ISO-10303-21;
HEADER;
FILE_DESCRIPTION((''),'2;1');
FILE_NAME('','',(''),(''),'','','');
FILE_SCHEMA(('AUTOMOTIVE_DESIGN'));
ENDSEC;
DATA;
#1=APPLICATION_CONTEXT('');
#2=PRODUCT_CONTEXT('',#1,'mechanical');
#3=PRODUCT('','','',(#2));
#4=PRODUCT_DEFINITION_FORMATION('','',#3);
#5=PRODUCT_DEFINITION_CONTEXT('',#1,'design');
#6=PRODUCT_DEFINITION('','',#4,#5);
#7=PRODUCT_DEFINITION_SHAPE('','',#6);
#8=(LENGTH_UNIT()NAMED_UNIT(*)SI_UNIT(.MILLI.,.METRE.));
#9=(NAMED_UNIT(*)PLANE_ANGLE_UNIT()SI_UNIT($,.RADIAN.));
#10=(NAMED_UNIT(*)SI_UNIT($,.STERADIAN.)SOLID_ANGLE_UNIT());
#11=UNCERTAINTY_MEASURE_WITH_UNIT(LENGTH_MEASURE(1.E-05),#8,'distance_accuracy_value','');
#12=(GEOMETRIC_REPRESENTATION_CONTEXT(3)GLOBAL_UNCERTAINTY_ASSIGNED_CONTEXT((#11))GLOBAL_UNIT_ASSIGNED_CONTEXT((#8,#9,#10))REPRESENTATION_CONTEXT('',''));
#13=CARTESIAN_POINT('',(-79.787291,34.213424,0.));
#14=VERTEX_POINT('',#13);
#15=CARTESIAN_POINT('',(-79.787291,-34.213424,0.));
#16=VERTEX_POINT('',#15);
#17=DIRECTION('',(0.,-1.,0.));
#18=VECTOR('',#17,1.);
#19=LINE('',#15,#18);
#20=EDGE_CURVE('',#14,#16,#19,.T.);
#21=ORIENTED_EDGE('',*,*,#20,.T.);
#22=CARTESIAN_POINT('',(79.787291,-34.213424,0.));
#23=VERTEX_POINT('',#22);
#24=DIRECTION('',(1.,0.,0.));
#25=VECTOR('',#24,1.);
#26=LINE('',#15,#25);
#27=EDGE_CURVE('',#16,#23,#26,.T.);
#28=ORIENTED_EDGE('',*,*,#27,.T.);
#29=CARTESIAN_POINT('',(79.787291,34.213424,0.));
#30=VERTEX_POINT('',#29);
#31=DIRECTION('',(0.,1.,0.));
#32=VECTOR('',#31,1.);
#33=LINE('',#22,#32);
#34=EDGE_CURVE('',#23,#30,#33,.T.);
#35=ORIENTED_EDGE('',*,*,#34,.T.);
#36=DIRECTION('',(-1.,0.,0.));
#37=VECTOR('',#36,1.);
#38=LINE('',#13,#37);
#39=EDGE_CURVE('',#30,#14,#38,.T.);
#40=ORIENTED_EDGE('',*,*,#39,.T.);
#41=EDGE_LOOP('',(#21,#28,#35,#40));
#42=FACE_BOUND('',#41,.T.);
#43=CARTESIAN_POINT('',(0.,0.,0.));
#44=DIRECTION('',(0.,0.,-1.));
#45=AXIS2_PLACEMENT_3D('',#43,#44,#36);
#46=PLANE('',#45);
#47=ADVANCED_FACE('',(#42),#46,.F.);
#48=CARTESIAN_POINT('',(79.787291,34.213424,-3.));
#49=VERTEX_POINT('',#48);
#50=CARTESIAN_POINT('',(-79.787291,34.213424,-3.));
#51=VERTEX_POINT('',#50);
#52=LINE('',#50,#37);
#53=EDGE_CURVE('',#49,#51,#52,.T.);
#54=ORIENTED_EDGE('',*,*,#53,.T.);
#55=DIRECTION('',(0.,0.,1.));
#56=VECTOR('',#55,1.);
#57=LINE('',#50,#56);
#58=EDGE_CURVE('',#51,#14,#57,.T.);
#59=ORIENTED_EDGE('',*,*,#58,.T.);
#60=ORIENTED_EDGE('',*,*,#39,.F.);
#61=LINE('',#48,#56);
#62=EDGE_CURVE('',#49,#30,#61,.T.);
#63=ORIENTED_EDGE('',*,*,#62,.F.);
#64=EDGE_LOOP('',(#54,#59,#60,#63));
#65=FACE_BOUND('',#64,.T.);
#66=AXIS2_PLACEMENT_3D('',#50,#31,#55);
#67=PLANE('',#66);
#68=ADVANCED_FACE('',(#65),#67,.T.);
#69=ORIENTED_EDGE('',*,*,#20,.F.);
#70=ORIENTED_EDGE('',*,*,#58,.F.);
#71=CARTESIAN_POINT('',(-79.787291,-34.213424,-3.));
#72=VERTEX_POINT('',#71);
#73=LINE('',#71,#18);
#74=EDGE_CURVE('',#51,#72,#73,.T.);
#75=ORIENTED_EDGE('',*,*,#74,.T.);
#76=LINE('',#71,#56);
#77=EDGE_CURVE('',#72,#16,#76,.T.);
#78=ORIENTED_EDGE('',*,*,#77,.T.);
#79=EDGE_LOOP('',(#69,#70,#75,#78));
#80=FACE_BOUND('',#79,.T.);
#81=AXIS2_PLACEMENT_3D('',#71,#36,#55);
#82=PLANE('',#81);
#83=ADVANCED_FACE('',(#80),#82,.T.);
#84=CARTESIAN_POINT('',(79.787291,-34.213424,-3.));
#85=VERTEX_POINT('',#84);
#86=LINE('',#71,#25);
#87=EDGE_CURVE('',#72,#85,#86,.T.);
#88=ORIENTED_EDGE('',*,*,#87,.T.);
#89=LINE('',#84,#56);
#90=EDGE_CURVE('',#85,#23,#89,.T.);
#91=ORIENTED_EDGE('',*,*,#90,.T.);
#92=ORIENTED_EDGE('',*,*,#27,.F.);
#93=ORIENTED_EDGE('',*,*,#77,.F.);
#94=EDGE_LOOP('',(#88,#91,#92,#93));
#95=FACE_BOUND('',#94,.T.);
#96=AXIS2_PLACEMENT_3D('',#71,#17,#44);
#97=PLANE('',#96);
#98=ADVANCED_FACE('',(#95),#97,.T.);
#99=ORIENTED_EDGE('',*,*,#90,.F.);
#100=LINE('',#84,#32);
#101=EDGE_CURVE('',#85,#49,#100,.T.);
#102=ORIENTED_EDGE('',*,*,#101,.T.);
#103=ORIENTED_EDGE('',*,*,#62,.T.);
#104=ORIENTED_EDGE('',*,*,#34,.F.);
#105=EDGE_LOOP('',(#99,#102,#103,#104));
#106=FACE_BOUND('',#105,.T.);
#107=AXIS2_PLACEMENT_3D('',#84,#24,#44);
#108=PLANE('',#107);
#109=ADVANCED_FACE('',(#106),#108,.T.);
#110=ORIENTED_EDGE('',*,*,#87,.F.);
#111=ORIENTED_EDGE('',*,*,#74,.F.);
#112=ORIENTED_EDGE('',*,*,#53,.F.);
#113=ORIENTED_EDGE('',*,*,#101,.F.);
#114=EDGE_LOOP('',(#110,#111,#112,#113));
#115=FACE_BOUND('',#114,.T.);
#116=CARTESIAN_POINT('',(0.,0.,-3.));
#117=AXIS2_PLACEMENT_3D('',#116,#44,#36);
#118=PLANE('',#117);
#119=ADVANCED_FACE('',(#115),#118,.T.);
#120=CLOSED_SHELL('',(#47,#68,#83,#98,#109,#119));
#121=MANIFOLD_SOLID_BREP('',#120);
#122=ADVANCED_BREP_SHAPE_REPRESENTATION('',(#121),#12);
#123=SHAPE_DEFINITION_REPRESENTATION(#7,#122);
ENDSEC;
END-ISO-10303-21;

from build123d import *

# Parameters (mm, degrees)
SKETCH2_W          = 159.574581504
SKETCH2_H          = 68.426848692
BASE_FLANGE1_DEPTH = 3


# Sheet-metal steps are written as plain solids
with BuildPart() as part:
    # Sketch2 → Base-Flange1 (new body)
    with BuildSketch(Plane.XY):
        Rectangle(SKETCH2_W, SKETCH2_H)
    extrude(amount=-BASE_FLANGE1_DEPTH)


solid = part.part
